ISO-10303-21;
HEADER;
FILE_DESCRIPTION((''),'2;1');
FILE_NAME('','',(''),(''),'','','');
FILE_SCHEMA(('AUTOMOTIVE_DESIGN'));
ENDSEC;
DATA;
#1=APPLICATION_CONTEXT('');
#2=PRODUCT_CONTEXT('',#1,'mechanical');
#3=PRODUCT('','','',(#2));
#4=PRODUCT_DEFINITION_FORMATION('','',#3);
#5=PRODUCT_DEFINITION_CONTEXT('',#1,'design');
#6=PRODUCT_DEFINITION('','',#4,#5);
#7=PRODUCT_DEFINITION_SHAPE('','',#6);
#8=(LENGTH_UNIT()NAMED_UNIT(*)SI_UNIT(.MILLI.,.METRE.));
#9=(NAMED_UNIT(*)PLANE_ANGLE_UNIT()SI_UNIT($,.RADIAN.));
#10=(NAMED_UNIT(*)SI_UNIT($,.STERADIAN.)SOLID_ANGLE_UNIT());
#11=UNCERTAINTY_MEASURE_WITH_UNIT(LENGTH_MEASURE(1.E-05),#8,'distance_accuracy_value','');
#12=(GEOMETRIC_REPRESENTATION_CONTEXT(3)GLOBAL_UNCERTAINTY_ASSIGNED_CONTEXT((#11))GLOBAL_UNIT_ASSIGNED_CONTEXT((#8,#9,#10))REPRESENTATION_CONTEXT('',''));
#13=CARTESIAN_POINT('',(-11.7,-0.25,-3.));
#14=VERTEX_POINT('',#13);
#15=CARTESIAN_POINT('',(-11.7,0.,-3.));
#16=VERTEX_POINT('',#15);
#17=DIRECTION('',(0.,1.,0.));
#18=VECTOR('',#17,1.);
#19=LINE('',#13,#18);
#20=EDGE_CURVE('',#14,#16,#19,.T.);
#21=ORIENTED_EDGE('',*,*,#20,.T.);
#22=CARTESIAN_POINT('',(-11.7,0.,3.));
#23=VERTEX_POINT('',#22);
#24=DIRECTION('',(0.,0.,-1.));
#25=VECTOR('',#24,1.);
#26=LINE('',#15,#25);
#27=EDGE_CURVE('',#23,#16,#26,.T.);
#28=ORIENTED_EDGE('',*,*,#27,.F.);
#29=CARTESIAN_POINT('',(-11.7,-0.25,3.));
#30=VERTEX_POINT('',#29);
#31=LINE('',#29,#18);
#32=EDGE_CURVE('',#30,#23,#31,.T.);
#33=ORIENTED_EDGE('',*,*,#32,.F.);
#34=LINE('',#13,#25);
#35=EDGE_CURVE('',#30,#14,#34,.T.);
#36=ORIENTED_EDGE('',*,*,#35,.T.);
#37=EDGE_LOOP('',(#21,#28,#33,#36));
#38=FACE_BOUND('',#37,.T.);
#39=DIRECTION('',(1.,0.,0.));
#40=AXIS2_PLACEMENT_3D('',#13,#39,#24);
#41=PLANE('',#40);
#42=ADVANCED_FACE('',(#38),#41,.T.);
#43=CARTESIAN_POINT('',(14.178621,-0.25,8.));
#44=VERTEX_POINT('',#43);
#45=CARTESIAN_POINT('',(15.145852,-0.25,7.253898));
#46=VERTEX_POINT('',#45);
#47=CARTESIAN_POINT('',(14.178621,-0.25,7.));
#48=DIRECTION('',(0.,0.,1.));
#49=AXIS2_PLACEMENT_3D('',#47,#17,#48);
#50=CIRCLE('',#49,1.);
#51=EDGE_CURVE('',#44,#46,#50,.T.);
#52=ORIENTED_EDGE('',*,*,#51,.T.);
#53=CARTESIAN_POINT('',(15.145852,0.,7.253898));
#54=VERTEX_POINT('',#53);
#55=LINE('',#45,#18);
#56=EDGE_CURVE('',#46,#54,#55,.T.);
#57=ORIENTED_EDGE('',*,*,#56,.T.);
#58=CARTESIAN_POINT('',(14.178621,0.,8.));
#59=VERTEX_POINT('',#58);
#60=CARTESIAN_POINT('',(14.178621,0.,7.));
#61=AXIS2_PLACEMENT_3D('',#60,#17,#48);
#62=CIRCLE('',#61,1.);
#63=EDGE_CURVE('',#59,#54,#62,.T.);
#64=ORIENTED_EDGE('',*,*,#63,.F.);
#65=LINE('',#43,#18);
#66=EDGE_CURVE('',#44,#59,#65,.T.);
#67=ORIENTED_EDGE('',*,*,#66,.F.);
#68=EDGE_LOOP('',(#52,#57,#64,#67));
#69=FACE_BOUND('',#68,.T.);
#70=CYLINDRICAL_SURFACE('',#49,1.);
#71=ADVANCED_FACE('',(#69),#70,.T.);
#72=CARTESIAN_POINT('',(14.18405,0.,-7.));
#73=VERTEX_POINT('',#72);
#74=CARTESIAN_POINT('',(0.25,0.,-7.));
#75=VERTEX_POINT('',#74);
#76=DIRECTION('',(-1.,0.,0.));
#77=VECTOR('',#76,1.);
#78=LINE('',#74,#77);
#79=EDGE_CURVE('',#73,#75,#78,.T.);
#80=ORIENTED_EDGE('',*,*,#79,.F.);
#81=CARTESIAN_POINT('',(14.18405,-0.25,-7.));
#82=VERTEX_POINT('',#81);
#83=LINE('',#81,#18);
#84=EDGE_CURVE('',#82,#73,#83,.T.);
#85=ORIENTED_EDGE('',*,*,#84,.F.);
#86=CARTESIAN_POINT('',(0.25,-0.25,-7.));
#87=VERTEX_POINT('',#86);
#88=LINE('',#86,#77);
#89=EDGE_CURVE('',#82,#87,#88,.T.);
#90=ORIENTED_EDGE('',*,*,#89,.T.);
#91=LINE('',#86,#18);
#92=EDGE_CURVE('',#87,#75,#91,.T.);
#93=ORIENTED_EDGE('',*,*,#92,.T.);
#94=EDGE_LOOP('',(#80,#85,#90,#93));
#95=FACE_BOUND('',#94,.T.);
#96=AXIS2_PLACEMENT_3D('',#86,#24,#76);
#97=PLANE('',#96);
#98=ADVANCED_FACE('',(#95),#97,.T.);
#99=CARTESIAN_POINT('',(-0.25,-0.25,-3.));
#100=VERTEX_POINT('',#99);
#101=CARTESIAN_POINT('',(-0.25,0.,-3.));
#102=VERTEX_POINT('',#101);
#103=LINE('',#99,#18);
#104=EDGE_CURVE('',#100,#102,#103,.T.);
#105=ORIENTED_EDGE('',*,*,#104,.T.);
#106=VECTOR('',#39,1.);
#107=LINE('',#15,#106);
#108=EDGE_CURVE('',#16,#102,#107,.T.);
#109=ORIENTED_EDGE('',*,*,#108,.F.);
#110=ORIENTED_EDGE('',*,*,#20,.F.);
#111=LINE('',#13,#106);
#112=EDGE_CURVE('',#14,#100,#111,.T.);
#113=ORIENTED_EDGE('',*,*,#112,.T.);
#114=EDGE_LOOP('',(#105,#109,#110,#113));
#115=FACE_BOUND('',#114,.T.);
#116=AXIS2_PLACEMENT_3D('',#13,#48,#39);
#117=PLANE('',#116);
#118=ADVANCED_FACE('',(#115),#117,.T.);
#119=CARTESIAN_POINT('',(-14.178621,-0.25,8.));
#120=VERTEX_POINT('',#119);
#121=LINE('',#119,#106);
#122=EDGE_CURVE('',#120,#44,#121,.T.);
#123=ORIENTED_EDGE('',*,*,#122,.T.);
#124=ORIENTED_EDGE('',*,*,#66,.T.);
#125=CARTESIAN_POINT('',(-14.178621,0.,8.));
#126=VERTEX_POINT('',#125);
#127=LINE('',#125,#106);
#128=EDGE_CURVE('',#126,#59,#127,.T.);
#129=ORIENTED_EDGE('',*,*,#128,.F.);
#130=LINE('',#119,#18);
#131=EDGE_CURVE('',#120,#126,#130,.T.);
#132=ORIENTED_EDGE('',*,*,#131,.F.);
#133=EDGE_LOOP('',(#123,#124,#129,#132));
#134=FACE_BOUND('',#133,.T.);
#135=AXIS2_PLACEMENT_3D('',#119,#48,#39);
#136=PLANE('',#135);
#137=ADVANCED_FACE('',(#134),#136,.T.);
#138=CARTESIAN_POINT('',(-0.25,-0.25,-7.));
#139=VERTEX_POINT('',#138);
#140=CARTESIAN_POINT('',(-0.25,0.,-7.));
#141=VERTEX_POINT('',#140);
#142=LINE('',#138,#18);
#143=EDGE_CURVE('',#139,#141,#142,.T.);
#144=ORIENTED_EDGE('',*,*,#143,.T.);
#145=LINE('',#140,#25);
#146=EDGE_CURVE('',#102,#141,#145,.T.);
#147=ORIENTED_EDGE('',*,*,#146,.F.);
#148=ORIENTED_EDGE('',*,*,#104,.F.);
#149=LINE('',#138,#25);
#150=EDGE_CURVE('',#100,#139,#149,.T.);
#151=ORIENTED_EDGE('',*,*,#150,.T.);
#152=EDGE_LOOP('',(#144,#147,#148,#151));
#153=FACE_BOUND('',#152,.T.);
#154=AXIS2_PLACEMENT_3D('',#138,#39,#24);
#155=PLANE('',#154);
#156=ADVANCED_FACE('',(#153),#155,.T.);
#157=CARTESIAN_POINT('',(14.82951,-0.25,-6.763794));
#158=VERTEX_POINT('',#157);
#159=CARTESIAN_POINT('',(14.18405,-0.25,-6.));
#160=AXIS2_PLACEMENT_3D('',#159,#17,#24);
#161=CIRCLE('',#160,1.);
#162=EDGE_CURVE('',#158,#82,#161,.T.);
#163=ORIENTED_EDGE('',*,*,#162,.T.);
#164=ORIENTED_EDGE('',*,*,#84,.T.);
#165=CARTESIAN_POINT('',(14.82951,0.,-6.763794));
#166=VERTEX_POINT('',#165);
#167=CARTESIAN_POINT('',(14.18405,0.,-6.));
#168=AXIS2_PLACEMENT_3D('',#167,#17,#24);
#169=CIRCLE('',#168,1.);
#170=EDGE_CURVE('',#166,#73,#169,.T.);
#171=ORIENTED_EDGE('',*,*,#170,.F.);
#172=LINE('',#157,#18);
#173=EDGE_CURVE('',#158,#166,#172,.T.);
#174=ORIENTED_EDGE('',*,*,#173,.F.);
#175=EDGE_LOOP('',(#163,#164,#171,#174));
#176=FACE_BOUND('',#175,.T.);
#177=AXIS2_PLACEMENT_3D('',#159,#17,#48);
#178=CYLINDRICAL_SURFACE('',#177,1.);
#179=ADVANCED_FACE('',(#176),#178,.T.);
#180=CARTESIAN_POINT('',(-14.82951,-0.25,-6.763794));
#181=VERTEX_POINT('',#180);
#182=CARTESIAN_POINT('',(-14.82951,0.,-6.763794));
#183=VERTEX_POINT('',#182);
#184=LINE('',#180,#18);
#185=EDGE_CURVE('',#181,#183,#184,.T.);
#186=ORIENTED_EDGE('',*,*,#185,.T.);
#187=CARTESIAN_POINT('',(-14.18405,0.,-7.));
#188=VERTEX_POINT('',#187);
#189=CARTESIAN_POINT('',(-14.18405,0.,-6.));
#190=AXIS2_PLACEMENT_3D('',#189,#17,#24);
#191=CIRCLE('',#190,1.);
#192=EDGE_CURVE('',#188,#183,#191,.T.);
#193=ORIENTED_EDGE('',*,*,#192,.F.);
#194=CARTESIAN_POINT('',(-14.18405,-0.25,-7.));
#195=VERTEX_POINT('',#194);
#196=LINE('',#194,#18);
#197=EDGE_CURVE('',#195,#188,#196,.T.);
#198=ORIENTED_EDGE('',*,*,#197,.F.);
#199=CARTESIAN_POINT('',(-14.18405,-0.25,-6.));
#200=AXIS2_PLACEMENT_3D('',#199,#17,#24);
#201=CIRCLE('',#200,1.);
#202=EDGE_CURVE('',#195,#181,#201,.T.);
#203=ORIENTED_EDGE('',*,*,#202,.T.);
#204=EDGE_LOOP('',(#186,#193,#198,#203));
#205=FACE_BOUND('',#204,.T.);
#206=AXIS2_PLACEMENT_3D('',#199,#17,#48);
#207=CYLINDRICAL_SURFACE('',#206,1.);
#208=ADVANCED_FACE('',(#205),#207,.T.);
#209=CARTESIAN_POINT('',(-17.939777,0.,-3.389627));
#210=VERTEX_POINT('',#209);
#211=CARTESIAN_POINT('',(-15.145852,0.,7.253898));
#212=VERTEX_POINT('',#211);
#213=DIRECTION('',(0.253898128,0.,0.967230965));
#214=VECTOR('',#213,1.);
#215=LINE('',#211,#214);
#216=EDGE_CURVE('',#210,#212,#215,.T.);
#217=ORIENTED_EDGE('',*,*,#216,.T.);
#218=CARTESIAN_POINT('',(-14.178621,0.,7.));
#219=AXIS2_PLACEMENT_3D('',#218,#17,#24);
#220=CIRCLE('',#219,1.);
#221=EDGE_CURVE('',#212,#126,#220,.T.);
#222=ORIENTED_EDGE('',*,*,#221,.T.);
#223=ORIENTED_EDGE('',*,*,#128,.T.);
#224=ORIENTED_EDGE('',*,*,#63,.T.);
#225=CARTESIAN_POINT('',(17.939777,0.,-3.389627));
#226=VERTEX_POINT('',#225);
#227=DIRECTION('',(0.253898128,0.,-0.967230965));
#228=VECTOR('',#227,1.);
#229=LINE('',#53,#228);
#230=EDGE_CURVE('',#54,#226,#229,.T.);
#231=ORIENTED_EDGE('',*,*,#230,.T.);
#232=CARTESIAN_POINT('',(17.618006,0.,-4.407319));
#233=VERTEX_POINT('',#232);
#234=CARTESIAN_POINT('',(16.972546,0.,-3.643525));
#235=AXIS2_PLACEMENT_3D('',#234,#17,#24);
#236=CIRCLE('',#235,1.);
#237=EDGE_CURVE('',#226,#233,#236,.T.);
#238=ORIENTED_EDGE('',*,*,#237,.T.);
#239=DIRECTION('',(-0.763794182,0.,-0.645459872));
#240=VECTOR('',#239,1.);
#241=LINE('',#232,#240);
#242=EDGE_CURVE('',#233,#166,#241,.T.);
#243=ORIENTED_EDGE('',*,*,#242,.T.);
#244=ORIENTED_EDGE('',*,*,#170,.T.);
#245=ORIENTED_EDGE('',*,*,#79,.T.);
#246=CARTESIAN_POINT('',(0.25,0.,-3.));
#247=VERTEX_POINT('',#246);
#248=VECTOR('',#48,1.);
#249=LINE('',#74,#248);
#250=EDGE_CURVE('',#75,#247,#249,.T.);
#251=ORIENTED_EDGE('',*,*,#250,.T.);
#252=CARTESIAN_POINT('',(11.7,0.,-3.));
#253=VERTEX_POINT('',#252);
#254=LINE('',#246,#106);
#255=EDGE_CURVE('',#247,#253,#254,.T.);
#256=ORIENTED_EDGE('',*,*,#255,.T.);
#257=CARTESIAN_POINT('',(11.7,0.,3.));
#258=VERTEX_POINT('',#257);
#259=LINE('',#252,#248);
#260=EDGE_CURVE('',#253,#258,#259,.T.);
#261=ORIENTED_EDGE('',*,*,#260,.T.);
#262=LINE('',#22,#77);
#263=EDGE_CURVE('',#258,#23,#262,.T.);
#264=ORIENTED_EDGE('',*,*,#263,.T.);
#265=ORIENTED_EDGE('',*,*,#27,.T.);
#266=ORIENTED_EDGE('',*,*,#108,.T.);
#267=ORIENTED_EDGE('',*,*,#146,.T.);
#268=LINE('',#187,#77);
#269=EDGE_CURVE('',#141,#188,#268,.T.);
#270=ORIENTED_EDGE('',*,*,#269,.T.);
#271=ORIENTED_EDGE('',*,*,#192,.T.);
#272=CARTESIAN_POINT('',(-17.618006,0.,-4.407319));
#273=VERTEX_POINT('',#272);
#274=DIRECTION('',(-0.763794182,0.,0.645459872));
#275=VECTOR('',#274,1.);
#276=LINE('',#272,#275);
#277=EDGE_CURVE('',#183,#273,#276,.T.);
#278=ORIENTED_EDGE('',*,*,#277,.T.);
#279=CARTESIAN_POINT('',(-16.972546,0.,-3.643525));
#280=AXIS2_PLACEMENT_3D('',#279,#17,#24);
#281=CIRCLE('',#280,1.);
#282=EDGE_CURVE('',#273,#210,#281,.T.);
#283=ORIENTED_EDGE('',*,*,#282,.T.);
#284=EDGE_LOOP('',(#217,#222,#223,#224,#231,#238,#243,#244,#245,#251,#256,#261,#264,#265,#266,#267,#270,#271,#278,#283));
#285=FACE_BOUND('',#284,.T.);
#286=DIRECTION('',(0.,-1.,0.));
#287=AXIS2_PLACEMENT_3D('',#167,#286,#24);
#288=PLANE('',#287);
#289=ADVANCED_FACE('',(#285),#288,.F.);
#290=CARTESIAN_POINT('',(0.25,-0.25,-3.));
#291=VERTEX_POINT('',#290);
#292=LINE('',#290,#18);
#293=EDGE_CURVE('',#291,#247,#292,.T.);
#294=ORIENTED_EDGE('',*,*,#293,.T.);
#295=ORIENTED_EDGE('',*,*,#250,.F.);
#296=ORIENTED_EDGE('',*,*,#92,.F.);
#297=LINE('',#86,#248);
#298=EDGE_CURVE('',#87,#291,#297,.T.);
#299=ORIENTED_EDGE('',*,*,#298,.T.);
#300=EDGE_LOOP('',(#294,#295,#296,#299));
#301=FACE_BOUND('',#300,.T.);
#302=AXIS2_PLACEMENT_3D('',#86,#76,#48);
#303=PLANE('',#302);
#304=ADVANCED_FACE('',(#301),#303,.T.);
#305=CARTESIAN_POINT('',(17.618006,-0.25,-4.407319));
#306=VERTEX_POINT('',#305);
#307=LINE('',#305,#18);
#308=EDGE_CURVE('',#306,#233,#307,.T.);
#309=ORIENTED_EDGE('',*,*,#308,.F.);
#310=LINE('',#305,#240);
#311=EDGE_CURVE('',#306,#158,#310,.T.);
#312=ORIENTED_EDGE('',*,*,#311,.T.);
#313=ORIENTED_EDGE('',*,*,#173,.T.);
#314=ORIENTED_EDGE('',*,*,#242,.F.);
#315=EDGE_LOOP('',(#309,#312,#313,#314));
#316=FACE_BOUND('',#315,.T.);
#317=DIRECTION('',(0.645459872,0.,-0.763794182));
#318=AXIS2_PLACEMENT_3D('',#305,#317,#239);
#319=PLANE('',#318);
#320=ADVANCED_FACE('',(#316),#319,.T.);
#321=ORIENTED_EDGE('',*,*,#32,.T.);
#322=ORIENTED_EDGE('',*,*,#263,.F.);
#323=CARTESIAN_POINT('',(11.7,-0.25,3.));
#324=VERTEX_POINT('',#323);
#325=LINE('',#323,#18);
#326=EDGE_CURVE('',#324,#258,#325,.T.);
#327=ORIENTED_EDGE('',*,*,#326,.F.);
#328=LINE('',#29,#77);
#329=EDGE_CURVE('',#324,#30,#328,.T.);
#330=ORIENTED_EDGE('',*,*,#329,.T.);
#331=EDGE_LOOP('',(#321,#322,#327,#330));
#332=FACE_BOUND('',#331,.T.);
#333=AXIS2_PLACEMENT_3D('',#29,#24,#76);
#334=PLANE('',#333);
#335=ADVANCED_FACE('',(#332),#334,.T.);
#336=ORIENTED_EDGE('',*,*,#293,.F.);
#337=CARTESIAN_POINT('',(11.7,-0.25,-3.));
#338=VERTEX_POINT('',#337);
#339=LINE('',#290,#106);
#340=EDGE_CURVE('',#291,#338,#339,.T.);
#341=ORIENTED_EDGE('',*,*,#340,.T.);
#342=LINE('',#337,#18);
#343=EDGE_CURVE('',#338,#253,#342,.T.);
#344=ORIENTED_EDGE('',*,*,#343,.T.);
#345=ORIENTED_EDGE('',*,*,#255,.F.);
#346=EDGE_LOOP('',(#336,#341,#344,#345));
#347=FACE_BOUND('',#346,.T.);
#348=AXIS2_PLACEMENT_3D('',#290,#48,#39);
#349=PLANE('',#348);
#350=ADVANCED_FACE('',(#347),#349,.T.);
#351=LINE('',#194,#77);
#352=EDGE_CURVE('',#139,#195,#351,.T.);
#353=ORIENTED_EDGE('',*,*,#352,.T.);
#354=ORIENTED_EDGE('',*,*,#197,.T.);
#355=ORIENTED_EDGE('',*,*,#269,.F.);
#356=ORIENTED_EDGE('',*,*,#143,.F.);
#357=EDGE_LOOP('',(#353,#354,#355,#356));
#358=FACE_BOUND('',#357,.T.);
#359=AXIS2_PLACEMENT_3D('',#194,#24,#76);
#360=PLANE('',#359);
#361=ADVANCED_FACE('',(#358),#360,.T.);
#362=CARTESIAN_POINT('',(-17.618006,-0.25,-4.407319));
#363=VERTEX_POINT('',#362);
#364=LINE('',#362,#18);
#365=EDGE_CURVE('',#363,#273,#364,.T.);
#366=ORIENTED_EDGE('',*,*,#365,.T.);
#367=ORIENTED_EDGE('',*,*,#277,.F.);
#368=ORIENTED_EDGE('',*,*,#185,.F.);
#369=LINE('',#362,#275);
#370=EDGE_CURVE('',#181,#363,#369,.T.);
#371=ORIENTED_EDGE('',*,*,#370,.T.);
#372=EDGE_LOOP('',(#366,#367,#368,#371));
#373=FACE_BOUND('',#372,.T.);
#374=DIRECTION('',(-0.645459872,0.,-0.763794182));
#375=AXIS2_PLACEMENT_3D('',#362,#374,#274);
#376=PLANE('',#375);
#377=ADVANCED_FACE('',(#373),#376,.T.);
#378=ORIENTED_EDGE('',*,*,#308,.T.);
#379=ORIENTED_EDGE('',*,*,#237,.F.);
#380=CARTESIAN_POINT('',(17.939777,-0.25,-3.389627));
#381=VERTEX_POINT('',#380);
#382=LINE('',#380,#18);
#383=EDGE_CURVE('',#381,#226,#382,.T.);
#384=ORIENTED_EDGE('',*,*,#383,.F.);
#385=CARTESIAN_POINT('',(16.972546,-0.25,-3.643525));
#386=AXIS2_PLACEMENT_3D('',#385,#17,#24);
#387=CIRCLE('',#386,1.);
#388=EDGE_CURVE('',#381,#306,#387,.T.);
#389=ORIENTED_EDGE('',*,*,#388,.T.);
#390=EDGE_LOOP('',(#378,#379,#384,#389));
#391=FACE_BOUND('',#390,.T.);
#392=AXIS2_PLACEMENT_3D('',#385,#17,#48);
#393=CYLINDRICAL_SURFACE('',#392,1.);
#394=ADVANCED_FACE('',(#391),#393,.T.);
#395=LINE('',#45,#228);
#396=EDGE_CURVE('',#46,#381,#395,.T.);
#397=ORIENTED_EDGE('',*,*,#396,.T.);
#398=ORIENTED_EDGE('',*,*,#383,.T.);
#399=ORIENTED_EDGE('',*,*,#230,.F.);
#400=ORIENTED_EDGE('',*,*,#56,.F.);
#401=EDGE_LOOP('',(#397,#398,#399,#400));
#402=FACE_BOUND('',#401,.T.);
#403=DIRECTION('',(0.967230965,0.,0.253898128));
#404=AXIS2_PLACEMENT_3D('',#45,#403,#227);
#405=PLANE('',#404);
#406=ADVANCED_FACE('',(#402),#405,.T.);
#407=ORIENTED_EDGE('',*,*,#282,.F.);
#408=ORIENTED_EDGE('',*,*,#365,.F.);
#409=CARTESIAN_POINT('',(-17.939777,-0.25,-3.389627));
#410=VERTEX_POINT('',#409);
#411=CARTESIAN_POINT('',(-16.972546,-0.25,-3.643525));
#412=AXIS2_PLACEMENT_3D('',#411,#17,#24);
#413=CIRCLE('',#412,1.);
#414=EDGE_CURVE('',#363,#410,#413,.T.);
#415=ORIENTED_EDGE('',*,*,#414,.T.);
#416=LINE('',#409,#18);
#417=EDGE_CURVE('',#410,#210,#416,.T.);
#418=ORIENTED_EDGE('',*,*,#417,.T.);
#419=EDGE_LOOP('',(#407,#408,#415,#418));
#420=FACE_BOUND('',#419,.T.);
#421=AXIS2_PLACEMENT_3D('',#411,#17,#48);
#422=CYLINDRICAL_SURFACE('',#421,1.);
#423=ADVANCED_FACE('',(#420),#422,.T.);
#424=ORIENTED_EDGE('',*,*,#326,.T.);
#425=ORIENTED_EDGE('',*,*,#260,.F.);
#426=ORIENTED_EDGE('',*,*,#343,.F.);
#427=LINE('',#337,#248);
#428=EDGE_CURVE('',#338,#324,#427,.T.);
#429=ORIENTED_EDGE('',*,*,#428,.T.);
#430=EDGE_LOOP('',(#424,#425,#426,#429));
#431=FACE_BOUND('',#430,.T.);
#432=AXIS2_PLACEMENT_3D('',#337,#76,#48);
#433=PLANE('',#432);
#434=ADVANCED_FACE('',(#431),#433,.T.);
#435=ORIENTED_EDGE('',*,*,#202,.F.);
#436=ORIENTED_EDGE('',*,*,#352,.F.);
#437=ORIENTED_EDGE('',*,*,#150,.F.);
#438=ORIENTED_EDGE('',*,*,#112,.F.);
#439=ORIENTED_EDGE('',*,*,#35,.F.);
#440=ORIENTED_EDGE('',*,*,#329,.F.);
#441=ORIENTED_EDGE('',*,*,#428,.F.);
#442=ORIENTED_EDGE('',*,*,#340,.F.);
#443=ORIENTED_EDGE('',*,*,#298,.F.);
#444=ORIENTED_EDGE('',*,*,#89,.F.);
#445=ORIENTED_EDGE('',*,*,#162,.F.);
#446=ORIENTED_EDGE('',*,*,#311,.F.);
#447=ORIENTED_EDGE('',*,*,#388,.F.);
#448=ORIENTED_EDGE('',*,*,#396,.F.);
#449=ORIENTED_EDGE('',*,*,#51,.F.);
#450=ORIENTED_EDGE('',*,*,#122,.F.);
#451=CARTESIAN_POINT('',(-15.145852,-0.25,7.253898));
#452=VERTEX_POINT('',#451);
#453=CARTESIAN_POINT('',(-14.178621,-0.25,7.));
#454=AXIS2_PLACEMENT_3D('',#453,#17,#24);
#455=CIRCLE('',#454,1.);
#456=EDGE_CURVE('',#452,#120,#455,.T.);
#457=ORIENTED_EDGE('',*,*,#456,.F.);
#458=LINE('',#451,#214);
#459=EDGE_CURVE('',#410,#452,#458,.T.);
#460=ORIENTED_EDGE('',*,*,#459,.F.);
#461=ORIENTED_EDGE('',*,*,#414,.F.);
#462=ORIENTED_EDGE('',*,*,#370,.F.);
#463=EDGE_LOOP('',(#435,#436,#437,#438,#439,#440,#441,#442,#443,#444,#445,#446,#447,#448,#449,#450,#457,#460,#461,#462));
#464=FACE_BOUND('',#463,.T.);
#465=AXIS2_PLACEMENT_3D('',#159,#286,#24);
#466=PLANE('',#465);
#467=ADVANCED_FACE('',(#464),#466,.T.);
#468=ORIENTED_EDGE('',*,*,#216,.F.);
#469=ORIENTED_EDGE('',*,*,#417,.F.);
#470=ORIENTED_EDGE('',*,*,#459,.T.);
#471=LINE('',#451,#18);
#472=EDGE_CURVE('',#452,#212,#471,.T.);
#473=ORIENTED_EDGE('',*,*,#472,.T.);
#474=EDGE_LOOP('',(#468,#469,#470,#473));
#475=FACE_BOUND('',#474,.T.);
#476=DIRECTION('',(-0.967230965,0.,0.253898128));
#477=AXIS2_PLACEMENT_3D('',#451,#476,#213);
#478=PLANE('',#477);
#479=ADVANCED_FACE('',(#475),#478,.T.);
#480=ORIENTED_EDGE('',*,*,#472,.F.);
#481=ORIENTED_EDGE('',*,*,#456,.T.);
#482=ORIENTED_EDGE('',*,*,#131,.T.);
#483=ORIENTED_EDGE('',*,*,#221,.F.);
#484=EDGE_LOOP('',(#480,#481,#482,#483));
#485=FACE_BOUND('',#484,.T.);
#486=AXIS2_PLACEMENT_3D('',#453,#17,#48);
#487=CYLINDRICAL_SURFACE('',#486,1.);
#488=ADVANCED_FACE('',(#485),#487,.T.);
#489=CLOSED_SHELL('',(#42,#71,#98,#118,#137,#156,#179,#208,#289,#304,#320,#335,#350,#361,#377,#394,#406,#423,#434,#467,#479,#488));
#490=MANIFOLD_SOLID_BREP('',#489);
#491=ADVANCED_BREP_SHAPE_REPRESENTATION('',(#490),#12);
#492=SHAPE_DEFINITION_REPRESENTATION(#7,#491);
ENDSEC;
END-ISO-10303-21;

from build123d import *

# Parameters (mm, degrees)
BASE_FLANGE1_DEPTH = 0.25


# Sheet-metal steps are written as plain solids
with BuildPart() as part:
    # Sketch1 → Base-Flange1 (new body)
    with BuildSketch(Plane(origin=(0, 0, 0), x_dir=(1, 0, 0), z_dir=(0, 1, 0))):
        with BuildLine():
            Line((-14.178620776, -8), (14.178620776, -8))
            ThreePointArc((14.178620776, -8), (14.789399734, -7.791801152), (15.145851741, -7.253898128))
            Line((15.145851741, -7.253898128), (17.939776994, 3.389626646))
            ThreePointArc((17.939776994, 3.389626646), (17.926022481, 3.944992277), (17.618005902, 4.407318956))
            Line((17.618005902, 4.407318956), (14.829510217, 6.763794182))
            ThreePointArc((14.829510217, 6.763794182), (14.527711383, 6.939093761), (14.184050345, 7))
            Line((14.184050345, 7), (0.25, 7))
            Line((0.25, 7), (0.25, 3))
            Line((0.25, 3), (11.7, 3))
            Line((11.7, 3), (11.7, -3))
            Line((11.7, -3), (-11.7, -3))
            Line((-11.7, -3), (-11.7, 3))
            Line((-11.7, 3), (-0.25, 3))
            Line((-0.25, 3), (-0.25, 7))
            Line((-0.25, 7), (-14.184050345, 7))
            ThreePointArc((-14.184050345, 7), (-14.527711383, 6.939093761), (-14.829510217, 6.763794182))
            Line((-14.829510217, 6.763794182), (-17.618005902, 4.407318956))
            ThreePointArc((-17.618005902, 4.407318956), (-17.926022481, 3.944992277), (-17.939776994, 3.389626646))
            Line((-17.939776994, 3.389626646), (-15.145851741, -7.253898128))
            ThreePointArc((-15.145851741, -7.253898128), (-14.789399734, -7.791801152), (-14.178620776, -8))
        make_face()
    extrude(amount=-BASE_FLANGE1_DEPTH)


solid = part.part
